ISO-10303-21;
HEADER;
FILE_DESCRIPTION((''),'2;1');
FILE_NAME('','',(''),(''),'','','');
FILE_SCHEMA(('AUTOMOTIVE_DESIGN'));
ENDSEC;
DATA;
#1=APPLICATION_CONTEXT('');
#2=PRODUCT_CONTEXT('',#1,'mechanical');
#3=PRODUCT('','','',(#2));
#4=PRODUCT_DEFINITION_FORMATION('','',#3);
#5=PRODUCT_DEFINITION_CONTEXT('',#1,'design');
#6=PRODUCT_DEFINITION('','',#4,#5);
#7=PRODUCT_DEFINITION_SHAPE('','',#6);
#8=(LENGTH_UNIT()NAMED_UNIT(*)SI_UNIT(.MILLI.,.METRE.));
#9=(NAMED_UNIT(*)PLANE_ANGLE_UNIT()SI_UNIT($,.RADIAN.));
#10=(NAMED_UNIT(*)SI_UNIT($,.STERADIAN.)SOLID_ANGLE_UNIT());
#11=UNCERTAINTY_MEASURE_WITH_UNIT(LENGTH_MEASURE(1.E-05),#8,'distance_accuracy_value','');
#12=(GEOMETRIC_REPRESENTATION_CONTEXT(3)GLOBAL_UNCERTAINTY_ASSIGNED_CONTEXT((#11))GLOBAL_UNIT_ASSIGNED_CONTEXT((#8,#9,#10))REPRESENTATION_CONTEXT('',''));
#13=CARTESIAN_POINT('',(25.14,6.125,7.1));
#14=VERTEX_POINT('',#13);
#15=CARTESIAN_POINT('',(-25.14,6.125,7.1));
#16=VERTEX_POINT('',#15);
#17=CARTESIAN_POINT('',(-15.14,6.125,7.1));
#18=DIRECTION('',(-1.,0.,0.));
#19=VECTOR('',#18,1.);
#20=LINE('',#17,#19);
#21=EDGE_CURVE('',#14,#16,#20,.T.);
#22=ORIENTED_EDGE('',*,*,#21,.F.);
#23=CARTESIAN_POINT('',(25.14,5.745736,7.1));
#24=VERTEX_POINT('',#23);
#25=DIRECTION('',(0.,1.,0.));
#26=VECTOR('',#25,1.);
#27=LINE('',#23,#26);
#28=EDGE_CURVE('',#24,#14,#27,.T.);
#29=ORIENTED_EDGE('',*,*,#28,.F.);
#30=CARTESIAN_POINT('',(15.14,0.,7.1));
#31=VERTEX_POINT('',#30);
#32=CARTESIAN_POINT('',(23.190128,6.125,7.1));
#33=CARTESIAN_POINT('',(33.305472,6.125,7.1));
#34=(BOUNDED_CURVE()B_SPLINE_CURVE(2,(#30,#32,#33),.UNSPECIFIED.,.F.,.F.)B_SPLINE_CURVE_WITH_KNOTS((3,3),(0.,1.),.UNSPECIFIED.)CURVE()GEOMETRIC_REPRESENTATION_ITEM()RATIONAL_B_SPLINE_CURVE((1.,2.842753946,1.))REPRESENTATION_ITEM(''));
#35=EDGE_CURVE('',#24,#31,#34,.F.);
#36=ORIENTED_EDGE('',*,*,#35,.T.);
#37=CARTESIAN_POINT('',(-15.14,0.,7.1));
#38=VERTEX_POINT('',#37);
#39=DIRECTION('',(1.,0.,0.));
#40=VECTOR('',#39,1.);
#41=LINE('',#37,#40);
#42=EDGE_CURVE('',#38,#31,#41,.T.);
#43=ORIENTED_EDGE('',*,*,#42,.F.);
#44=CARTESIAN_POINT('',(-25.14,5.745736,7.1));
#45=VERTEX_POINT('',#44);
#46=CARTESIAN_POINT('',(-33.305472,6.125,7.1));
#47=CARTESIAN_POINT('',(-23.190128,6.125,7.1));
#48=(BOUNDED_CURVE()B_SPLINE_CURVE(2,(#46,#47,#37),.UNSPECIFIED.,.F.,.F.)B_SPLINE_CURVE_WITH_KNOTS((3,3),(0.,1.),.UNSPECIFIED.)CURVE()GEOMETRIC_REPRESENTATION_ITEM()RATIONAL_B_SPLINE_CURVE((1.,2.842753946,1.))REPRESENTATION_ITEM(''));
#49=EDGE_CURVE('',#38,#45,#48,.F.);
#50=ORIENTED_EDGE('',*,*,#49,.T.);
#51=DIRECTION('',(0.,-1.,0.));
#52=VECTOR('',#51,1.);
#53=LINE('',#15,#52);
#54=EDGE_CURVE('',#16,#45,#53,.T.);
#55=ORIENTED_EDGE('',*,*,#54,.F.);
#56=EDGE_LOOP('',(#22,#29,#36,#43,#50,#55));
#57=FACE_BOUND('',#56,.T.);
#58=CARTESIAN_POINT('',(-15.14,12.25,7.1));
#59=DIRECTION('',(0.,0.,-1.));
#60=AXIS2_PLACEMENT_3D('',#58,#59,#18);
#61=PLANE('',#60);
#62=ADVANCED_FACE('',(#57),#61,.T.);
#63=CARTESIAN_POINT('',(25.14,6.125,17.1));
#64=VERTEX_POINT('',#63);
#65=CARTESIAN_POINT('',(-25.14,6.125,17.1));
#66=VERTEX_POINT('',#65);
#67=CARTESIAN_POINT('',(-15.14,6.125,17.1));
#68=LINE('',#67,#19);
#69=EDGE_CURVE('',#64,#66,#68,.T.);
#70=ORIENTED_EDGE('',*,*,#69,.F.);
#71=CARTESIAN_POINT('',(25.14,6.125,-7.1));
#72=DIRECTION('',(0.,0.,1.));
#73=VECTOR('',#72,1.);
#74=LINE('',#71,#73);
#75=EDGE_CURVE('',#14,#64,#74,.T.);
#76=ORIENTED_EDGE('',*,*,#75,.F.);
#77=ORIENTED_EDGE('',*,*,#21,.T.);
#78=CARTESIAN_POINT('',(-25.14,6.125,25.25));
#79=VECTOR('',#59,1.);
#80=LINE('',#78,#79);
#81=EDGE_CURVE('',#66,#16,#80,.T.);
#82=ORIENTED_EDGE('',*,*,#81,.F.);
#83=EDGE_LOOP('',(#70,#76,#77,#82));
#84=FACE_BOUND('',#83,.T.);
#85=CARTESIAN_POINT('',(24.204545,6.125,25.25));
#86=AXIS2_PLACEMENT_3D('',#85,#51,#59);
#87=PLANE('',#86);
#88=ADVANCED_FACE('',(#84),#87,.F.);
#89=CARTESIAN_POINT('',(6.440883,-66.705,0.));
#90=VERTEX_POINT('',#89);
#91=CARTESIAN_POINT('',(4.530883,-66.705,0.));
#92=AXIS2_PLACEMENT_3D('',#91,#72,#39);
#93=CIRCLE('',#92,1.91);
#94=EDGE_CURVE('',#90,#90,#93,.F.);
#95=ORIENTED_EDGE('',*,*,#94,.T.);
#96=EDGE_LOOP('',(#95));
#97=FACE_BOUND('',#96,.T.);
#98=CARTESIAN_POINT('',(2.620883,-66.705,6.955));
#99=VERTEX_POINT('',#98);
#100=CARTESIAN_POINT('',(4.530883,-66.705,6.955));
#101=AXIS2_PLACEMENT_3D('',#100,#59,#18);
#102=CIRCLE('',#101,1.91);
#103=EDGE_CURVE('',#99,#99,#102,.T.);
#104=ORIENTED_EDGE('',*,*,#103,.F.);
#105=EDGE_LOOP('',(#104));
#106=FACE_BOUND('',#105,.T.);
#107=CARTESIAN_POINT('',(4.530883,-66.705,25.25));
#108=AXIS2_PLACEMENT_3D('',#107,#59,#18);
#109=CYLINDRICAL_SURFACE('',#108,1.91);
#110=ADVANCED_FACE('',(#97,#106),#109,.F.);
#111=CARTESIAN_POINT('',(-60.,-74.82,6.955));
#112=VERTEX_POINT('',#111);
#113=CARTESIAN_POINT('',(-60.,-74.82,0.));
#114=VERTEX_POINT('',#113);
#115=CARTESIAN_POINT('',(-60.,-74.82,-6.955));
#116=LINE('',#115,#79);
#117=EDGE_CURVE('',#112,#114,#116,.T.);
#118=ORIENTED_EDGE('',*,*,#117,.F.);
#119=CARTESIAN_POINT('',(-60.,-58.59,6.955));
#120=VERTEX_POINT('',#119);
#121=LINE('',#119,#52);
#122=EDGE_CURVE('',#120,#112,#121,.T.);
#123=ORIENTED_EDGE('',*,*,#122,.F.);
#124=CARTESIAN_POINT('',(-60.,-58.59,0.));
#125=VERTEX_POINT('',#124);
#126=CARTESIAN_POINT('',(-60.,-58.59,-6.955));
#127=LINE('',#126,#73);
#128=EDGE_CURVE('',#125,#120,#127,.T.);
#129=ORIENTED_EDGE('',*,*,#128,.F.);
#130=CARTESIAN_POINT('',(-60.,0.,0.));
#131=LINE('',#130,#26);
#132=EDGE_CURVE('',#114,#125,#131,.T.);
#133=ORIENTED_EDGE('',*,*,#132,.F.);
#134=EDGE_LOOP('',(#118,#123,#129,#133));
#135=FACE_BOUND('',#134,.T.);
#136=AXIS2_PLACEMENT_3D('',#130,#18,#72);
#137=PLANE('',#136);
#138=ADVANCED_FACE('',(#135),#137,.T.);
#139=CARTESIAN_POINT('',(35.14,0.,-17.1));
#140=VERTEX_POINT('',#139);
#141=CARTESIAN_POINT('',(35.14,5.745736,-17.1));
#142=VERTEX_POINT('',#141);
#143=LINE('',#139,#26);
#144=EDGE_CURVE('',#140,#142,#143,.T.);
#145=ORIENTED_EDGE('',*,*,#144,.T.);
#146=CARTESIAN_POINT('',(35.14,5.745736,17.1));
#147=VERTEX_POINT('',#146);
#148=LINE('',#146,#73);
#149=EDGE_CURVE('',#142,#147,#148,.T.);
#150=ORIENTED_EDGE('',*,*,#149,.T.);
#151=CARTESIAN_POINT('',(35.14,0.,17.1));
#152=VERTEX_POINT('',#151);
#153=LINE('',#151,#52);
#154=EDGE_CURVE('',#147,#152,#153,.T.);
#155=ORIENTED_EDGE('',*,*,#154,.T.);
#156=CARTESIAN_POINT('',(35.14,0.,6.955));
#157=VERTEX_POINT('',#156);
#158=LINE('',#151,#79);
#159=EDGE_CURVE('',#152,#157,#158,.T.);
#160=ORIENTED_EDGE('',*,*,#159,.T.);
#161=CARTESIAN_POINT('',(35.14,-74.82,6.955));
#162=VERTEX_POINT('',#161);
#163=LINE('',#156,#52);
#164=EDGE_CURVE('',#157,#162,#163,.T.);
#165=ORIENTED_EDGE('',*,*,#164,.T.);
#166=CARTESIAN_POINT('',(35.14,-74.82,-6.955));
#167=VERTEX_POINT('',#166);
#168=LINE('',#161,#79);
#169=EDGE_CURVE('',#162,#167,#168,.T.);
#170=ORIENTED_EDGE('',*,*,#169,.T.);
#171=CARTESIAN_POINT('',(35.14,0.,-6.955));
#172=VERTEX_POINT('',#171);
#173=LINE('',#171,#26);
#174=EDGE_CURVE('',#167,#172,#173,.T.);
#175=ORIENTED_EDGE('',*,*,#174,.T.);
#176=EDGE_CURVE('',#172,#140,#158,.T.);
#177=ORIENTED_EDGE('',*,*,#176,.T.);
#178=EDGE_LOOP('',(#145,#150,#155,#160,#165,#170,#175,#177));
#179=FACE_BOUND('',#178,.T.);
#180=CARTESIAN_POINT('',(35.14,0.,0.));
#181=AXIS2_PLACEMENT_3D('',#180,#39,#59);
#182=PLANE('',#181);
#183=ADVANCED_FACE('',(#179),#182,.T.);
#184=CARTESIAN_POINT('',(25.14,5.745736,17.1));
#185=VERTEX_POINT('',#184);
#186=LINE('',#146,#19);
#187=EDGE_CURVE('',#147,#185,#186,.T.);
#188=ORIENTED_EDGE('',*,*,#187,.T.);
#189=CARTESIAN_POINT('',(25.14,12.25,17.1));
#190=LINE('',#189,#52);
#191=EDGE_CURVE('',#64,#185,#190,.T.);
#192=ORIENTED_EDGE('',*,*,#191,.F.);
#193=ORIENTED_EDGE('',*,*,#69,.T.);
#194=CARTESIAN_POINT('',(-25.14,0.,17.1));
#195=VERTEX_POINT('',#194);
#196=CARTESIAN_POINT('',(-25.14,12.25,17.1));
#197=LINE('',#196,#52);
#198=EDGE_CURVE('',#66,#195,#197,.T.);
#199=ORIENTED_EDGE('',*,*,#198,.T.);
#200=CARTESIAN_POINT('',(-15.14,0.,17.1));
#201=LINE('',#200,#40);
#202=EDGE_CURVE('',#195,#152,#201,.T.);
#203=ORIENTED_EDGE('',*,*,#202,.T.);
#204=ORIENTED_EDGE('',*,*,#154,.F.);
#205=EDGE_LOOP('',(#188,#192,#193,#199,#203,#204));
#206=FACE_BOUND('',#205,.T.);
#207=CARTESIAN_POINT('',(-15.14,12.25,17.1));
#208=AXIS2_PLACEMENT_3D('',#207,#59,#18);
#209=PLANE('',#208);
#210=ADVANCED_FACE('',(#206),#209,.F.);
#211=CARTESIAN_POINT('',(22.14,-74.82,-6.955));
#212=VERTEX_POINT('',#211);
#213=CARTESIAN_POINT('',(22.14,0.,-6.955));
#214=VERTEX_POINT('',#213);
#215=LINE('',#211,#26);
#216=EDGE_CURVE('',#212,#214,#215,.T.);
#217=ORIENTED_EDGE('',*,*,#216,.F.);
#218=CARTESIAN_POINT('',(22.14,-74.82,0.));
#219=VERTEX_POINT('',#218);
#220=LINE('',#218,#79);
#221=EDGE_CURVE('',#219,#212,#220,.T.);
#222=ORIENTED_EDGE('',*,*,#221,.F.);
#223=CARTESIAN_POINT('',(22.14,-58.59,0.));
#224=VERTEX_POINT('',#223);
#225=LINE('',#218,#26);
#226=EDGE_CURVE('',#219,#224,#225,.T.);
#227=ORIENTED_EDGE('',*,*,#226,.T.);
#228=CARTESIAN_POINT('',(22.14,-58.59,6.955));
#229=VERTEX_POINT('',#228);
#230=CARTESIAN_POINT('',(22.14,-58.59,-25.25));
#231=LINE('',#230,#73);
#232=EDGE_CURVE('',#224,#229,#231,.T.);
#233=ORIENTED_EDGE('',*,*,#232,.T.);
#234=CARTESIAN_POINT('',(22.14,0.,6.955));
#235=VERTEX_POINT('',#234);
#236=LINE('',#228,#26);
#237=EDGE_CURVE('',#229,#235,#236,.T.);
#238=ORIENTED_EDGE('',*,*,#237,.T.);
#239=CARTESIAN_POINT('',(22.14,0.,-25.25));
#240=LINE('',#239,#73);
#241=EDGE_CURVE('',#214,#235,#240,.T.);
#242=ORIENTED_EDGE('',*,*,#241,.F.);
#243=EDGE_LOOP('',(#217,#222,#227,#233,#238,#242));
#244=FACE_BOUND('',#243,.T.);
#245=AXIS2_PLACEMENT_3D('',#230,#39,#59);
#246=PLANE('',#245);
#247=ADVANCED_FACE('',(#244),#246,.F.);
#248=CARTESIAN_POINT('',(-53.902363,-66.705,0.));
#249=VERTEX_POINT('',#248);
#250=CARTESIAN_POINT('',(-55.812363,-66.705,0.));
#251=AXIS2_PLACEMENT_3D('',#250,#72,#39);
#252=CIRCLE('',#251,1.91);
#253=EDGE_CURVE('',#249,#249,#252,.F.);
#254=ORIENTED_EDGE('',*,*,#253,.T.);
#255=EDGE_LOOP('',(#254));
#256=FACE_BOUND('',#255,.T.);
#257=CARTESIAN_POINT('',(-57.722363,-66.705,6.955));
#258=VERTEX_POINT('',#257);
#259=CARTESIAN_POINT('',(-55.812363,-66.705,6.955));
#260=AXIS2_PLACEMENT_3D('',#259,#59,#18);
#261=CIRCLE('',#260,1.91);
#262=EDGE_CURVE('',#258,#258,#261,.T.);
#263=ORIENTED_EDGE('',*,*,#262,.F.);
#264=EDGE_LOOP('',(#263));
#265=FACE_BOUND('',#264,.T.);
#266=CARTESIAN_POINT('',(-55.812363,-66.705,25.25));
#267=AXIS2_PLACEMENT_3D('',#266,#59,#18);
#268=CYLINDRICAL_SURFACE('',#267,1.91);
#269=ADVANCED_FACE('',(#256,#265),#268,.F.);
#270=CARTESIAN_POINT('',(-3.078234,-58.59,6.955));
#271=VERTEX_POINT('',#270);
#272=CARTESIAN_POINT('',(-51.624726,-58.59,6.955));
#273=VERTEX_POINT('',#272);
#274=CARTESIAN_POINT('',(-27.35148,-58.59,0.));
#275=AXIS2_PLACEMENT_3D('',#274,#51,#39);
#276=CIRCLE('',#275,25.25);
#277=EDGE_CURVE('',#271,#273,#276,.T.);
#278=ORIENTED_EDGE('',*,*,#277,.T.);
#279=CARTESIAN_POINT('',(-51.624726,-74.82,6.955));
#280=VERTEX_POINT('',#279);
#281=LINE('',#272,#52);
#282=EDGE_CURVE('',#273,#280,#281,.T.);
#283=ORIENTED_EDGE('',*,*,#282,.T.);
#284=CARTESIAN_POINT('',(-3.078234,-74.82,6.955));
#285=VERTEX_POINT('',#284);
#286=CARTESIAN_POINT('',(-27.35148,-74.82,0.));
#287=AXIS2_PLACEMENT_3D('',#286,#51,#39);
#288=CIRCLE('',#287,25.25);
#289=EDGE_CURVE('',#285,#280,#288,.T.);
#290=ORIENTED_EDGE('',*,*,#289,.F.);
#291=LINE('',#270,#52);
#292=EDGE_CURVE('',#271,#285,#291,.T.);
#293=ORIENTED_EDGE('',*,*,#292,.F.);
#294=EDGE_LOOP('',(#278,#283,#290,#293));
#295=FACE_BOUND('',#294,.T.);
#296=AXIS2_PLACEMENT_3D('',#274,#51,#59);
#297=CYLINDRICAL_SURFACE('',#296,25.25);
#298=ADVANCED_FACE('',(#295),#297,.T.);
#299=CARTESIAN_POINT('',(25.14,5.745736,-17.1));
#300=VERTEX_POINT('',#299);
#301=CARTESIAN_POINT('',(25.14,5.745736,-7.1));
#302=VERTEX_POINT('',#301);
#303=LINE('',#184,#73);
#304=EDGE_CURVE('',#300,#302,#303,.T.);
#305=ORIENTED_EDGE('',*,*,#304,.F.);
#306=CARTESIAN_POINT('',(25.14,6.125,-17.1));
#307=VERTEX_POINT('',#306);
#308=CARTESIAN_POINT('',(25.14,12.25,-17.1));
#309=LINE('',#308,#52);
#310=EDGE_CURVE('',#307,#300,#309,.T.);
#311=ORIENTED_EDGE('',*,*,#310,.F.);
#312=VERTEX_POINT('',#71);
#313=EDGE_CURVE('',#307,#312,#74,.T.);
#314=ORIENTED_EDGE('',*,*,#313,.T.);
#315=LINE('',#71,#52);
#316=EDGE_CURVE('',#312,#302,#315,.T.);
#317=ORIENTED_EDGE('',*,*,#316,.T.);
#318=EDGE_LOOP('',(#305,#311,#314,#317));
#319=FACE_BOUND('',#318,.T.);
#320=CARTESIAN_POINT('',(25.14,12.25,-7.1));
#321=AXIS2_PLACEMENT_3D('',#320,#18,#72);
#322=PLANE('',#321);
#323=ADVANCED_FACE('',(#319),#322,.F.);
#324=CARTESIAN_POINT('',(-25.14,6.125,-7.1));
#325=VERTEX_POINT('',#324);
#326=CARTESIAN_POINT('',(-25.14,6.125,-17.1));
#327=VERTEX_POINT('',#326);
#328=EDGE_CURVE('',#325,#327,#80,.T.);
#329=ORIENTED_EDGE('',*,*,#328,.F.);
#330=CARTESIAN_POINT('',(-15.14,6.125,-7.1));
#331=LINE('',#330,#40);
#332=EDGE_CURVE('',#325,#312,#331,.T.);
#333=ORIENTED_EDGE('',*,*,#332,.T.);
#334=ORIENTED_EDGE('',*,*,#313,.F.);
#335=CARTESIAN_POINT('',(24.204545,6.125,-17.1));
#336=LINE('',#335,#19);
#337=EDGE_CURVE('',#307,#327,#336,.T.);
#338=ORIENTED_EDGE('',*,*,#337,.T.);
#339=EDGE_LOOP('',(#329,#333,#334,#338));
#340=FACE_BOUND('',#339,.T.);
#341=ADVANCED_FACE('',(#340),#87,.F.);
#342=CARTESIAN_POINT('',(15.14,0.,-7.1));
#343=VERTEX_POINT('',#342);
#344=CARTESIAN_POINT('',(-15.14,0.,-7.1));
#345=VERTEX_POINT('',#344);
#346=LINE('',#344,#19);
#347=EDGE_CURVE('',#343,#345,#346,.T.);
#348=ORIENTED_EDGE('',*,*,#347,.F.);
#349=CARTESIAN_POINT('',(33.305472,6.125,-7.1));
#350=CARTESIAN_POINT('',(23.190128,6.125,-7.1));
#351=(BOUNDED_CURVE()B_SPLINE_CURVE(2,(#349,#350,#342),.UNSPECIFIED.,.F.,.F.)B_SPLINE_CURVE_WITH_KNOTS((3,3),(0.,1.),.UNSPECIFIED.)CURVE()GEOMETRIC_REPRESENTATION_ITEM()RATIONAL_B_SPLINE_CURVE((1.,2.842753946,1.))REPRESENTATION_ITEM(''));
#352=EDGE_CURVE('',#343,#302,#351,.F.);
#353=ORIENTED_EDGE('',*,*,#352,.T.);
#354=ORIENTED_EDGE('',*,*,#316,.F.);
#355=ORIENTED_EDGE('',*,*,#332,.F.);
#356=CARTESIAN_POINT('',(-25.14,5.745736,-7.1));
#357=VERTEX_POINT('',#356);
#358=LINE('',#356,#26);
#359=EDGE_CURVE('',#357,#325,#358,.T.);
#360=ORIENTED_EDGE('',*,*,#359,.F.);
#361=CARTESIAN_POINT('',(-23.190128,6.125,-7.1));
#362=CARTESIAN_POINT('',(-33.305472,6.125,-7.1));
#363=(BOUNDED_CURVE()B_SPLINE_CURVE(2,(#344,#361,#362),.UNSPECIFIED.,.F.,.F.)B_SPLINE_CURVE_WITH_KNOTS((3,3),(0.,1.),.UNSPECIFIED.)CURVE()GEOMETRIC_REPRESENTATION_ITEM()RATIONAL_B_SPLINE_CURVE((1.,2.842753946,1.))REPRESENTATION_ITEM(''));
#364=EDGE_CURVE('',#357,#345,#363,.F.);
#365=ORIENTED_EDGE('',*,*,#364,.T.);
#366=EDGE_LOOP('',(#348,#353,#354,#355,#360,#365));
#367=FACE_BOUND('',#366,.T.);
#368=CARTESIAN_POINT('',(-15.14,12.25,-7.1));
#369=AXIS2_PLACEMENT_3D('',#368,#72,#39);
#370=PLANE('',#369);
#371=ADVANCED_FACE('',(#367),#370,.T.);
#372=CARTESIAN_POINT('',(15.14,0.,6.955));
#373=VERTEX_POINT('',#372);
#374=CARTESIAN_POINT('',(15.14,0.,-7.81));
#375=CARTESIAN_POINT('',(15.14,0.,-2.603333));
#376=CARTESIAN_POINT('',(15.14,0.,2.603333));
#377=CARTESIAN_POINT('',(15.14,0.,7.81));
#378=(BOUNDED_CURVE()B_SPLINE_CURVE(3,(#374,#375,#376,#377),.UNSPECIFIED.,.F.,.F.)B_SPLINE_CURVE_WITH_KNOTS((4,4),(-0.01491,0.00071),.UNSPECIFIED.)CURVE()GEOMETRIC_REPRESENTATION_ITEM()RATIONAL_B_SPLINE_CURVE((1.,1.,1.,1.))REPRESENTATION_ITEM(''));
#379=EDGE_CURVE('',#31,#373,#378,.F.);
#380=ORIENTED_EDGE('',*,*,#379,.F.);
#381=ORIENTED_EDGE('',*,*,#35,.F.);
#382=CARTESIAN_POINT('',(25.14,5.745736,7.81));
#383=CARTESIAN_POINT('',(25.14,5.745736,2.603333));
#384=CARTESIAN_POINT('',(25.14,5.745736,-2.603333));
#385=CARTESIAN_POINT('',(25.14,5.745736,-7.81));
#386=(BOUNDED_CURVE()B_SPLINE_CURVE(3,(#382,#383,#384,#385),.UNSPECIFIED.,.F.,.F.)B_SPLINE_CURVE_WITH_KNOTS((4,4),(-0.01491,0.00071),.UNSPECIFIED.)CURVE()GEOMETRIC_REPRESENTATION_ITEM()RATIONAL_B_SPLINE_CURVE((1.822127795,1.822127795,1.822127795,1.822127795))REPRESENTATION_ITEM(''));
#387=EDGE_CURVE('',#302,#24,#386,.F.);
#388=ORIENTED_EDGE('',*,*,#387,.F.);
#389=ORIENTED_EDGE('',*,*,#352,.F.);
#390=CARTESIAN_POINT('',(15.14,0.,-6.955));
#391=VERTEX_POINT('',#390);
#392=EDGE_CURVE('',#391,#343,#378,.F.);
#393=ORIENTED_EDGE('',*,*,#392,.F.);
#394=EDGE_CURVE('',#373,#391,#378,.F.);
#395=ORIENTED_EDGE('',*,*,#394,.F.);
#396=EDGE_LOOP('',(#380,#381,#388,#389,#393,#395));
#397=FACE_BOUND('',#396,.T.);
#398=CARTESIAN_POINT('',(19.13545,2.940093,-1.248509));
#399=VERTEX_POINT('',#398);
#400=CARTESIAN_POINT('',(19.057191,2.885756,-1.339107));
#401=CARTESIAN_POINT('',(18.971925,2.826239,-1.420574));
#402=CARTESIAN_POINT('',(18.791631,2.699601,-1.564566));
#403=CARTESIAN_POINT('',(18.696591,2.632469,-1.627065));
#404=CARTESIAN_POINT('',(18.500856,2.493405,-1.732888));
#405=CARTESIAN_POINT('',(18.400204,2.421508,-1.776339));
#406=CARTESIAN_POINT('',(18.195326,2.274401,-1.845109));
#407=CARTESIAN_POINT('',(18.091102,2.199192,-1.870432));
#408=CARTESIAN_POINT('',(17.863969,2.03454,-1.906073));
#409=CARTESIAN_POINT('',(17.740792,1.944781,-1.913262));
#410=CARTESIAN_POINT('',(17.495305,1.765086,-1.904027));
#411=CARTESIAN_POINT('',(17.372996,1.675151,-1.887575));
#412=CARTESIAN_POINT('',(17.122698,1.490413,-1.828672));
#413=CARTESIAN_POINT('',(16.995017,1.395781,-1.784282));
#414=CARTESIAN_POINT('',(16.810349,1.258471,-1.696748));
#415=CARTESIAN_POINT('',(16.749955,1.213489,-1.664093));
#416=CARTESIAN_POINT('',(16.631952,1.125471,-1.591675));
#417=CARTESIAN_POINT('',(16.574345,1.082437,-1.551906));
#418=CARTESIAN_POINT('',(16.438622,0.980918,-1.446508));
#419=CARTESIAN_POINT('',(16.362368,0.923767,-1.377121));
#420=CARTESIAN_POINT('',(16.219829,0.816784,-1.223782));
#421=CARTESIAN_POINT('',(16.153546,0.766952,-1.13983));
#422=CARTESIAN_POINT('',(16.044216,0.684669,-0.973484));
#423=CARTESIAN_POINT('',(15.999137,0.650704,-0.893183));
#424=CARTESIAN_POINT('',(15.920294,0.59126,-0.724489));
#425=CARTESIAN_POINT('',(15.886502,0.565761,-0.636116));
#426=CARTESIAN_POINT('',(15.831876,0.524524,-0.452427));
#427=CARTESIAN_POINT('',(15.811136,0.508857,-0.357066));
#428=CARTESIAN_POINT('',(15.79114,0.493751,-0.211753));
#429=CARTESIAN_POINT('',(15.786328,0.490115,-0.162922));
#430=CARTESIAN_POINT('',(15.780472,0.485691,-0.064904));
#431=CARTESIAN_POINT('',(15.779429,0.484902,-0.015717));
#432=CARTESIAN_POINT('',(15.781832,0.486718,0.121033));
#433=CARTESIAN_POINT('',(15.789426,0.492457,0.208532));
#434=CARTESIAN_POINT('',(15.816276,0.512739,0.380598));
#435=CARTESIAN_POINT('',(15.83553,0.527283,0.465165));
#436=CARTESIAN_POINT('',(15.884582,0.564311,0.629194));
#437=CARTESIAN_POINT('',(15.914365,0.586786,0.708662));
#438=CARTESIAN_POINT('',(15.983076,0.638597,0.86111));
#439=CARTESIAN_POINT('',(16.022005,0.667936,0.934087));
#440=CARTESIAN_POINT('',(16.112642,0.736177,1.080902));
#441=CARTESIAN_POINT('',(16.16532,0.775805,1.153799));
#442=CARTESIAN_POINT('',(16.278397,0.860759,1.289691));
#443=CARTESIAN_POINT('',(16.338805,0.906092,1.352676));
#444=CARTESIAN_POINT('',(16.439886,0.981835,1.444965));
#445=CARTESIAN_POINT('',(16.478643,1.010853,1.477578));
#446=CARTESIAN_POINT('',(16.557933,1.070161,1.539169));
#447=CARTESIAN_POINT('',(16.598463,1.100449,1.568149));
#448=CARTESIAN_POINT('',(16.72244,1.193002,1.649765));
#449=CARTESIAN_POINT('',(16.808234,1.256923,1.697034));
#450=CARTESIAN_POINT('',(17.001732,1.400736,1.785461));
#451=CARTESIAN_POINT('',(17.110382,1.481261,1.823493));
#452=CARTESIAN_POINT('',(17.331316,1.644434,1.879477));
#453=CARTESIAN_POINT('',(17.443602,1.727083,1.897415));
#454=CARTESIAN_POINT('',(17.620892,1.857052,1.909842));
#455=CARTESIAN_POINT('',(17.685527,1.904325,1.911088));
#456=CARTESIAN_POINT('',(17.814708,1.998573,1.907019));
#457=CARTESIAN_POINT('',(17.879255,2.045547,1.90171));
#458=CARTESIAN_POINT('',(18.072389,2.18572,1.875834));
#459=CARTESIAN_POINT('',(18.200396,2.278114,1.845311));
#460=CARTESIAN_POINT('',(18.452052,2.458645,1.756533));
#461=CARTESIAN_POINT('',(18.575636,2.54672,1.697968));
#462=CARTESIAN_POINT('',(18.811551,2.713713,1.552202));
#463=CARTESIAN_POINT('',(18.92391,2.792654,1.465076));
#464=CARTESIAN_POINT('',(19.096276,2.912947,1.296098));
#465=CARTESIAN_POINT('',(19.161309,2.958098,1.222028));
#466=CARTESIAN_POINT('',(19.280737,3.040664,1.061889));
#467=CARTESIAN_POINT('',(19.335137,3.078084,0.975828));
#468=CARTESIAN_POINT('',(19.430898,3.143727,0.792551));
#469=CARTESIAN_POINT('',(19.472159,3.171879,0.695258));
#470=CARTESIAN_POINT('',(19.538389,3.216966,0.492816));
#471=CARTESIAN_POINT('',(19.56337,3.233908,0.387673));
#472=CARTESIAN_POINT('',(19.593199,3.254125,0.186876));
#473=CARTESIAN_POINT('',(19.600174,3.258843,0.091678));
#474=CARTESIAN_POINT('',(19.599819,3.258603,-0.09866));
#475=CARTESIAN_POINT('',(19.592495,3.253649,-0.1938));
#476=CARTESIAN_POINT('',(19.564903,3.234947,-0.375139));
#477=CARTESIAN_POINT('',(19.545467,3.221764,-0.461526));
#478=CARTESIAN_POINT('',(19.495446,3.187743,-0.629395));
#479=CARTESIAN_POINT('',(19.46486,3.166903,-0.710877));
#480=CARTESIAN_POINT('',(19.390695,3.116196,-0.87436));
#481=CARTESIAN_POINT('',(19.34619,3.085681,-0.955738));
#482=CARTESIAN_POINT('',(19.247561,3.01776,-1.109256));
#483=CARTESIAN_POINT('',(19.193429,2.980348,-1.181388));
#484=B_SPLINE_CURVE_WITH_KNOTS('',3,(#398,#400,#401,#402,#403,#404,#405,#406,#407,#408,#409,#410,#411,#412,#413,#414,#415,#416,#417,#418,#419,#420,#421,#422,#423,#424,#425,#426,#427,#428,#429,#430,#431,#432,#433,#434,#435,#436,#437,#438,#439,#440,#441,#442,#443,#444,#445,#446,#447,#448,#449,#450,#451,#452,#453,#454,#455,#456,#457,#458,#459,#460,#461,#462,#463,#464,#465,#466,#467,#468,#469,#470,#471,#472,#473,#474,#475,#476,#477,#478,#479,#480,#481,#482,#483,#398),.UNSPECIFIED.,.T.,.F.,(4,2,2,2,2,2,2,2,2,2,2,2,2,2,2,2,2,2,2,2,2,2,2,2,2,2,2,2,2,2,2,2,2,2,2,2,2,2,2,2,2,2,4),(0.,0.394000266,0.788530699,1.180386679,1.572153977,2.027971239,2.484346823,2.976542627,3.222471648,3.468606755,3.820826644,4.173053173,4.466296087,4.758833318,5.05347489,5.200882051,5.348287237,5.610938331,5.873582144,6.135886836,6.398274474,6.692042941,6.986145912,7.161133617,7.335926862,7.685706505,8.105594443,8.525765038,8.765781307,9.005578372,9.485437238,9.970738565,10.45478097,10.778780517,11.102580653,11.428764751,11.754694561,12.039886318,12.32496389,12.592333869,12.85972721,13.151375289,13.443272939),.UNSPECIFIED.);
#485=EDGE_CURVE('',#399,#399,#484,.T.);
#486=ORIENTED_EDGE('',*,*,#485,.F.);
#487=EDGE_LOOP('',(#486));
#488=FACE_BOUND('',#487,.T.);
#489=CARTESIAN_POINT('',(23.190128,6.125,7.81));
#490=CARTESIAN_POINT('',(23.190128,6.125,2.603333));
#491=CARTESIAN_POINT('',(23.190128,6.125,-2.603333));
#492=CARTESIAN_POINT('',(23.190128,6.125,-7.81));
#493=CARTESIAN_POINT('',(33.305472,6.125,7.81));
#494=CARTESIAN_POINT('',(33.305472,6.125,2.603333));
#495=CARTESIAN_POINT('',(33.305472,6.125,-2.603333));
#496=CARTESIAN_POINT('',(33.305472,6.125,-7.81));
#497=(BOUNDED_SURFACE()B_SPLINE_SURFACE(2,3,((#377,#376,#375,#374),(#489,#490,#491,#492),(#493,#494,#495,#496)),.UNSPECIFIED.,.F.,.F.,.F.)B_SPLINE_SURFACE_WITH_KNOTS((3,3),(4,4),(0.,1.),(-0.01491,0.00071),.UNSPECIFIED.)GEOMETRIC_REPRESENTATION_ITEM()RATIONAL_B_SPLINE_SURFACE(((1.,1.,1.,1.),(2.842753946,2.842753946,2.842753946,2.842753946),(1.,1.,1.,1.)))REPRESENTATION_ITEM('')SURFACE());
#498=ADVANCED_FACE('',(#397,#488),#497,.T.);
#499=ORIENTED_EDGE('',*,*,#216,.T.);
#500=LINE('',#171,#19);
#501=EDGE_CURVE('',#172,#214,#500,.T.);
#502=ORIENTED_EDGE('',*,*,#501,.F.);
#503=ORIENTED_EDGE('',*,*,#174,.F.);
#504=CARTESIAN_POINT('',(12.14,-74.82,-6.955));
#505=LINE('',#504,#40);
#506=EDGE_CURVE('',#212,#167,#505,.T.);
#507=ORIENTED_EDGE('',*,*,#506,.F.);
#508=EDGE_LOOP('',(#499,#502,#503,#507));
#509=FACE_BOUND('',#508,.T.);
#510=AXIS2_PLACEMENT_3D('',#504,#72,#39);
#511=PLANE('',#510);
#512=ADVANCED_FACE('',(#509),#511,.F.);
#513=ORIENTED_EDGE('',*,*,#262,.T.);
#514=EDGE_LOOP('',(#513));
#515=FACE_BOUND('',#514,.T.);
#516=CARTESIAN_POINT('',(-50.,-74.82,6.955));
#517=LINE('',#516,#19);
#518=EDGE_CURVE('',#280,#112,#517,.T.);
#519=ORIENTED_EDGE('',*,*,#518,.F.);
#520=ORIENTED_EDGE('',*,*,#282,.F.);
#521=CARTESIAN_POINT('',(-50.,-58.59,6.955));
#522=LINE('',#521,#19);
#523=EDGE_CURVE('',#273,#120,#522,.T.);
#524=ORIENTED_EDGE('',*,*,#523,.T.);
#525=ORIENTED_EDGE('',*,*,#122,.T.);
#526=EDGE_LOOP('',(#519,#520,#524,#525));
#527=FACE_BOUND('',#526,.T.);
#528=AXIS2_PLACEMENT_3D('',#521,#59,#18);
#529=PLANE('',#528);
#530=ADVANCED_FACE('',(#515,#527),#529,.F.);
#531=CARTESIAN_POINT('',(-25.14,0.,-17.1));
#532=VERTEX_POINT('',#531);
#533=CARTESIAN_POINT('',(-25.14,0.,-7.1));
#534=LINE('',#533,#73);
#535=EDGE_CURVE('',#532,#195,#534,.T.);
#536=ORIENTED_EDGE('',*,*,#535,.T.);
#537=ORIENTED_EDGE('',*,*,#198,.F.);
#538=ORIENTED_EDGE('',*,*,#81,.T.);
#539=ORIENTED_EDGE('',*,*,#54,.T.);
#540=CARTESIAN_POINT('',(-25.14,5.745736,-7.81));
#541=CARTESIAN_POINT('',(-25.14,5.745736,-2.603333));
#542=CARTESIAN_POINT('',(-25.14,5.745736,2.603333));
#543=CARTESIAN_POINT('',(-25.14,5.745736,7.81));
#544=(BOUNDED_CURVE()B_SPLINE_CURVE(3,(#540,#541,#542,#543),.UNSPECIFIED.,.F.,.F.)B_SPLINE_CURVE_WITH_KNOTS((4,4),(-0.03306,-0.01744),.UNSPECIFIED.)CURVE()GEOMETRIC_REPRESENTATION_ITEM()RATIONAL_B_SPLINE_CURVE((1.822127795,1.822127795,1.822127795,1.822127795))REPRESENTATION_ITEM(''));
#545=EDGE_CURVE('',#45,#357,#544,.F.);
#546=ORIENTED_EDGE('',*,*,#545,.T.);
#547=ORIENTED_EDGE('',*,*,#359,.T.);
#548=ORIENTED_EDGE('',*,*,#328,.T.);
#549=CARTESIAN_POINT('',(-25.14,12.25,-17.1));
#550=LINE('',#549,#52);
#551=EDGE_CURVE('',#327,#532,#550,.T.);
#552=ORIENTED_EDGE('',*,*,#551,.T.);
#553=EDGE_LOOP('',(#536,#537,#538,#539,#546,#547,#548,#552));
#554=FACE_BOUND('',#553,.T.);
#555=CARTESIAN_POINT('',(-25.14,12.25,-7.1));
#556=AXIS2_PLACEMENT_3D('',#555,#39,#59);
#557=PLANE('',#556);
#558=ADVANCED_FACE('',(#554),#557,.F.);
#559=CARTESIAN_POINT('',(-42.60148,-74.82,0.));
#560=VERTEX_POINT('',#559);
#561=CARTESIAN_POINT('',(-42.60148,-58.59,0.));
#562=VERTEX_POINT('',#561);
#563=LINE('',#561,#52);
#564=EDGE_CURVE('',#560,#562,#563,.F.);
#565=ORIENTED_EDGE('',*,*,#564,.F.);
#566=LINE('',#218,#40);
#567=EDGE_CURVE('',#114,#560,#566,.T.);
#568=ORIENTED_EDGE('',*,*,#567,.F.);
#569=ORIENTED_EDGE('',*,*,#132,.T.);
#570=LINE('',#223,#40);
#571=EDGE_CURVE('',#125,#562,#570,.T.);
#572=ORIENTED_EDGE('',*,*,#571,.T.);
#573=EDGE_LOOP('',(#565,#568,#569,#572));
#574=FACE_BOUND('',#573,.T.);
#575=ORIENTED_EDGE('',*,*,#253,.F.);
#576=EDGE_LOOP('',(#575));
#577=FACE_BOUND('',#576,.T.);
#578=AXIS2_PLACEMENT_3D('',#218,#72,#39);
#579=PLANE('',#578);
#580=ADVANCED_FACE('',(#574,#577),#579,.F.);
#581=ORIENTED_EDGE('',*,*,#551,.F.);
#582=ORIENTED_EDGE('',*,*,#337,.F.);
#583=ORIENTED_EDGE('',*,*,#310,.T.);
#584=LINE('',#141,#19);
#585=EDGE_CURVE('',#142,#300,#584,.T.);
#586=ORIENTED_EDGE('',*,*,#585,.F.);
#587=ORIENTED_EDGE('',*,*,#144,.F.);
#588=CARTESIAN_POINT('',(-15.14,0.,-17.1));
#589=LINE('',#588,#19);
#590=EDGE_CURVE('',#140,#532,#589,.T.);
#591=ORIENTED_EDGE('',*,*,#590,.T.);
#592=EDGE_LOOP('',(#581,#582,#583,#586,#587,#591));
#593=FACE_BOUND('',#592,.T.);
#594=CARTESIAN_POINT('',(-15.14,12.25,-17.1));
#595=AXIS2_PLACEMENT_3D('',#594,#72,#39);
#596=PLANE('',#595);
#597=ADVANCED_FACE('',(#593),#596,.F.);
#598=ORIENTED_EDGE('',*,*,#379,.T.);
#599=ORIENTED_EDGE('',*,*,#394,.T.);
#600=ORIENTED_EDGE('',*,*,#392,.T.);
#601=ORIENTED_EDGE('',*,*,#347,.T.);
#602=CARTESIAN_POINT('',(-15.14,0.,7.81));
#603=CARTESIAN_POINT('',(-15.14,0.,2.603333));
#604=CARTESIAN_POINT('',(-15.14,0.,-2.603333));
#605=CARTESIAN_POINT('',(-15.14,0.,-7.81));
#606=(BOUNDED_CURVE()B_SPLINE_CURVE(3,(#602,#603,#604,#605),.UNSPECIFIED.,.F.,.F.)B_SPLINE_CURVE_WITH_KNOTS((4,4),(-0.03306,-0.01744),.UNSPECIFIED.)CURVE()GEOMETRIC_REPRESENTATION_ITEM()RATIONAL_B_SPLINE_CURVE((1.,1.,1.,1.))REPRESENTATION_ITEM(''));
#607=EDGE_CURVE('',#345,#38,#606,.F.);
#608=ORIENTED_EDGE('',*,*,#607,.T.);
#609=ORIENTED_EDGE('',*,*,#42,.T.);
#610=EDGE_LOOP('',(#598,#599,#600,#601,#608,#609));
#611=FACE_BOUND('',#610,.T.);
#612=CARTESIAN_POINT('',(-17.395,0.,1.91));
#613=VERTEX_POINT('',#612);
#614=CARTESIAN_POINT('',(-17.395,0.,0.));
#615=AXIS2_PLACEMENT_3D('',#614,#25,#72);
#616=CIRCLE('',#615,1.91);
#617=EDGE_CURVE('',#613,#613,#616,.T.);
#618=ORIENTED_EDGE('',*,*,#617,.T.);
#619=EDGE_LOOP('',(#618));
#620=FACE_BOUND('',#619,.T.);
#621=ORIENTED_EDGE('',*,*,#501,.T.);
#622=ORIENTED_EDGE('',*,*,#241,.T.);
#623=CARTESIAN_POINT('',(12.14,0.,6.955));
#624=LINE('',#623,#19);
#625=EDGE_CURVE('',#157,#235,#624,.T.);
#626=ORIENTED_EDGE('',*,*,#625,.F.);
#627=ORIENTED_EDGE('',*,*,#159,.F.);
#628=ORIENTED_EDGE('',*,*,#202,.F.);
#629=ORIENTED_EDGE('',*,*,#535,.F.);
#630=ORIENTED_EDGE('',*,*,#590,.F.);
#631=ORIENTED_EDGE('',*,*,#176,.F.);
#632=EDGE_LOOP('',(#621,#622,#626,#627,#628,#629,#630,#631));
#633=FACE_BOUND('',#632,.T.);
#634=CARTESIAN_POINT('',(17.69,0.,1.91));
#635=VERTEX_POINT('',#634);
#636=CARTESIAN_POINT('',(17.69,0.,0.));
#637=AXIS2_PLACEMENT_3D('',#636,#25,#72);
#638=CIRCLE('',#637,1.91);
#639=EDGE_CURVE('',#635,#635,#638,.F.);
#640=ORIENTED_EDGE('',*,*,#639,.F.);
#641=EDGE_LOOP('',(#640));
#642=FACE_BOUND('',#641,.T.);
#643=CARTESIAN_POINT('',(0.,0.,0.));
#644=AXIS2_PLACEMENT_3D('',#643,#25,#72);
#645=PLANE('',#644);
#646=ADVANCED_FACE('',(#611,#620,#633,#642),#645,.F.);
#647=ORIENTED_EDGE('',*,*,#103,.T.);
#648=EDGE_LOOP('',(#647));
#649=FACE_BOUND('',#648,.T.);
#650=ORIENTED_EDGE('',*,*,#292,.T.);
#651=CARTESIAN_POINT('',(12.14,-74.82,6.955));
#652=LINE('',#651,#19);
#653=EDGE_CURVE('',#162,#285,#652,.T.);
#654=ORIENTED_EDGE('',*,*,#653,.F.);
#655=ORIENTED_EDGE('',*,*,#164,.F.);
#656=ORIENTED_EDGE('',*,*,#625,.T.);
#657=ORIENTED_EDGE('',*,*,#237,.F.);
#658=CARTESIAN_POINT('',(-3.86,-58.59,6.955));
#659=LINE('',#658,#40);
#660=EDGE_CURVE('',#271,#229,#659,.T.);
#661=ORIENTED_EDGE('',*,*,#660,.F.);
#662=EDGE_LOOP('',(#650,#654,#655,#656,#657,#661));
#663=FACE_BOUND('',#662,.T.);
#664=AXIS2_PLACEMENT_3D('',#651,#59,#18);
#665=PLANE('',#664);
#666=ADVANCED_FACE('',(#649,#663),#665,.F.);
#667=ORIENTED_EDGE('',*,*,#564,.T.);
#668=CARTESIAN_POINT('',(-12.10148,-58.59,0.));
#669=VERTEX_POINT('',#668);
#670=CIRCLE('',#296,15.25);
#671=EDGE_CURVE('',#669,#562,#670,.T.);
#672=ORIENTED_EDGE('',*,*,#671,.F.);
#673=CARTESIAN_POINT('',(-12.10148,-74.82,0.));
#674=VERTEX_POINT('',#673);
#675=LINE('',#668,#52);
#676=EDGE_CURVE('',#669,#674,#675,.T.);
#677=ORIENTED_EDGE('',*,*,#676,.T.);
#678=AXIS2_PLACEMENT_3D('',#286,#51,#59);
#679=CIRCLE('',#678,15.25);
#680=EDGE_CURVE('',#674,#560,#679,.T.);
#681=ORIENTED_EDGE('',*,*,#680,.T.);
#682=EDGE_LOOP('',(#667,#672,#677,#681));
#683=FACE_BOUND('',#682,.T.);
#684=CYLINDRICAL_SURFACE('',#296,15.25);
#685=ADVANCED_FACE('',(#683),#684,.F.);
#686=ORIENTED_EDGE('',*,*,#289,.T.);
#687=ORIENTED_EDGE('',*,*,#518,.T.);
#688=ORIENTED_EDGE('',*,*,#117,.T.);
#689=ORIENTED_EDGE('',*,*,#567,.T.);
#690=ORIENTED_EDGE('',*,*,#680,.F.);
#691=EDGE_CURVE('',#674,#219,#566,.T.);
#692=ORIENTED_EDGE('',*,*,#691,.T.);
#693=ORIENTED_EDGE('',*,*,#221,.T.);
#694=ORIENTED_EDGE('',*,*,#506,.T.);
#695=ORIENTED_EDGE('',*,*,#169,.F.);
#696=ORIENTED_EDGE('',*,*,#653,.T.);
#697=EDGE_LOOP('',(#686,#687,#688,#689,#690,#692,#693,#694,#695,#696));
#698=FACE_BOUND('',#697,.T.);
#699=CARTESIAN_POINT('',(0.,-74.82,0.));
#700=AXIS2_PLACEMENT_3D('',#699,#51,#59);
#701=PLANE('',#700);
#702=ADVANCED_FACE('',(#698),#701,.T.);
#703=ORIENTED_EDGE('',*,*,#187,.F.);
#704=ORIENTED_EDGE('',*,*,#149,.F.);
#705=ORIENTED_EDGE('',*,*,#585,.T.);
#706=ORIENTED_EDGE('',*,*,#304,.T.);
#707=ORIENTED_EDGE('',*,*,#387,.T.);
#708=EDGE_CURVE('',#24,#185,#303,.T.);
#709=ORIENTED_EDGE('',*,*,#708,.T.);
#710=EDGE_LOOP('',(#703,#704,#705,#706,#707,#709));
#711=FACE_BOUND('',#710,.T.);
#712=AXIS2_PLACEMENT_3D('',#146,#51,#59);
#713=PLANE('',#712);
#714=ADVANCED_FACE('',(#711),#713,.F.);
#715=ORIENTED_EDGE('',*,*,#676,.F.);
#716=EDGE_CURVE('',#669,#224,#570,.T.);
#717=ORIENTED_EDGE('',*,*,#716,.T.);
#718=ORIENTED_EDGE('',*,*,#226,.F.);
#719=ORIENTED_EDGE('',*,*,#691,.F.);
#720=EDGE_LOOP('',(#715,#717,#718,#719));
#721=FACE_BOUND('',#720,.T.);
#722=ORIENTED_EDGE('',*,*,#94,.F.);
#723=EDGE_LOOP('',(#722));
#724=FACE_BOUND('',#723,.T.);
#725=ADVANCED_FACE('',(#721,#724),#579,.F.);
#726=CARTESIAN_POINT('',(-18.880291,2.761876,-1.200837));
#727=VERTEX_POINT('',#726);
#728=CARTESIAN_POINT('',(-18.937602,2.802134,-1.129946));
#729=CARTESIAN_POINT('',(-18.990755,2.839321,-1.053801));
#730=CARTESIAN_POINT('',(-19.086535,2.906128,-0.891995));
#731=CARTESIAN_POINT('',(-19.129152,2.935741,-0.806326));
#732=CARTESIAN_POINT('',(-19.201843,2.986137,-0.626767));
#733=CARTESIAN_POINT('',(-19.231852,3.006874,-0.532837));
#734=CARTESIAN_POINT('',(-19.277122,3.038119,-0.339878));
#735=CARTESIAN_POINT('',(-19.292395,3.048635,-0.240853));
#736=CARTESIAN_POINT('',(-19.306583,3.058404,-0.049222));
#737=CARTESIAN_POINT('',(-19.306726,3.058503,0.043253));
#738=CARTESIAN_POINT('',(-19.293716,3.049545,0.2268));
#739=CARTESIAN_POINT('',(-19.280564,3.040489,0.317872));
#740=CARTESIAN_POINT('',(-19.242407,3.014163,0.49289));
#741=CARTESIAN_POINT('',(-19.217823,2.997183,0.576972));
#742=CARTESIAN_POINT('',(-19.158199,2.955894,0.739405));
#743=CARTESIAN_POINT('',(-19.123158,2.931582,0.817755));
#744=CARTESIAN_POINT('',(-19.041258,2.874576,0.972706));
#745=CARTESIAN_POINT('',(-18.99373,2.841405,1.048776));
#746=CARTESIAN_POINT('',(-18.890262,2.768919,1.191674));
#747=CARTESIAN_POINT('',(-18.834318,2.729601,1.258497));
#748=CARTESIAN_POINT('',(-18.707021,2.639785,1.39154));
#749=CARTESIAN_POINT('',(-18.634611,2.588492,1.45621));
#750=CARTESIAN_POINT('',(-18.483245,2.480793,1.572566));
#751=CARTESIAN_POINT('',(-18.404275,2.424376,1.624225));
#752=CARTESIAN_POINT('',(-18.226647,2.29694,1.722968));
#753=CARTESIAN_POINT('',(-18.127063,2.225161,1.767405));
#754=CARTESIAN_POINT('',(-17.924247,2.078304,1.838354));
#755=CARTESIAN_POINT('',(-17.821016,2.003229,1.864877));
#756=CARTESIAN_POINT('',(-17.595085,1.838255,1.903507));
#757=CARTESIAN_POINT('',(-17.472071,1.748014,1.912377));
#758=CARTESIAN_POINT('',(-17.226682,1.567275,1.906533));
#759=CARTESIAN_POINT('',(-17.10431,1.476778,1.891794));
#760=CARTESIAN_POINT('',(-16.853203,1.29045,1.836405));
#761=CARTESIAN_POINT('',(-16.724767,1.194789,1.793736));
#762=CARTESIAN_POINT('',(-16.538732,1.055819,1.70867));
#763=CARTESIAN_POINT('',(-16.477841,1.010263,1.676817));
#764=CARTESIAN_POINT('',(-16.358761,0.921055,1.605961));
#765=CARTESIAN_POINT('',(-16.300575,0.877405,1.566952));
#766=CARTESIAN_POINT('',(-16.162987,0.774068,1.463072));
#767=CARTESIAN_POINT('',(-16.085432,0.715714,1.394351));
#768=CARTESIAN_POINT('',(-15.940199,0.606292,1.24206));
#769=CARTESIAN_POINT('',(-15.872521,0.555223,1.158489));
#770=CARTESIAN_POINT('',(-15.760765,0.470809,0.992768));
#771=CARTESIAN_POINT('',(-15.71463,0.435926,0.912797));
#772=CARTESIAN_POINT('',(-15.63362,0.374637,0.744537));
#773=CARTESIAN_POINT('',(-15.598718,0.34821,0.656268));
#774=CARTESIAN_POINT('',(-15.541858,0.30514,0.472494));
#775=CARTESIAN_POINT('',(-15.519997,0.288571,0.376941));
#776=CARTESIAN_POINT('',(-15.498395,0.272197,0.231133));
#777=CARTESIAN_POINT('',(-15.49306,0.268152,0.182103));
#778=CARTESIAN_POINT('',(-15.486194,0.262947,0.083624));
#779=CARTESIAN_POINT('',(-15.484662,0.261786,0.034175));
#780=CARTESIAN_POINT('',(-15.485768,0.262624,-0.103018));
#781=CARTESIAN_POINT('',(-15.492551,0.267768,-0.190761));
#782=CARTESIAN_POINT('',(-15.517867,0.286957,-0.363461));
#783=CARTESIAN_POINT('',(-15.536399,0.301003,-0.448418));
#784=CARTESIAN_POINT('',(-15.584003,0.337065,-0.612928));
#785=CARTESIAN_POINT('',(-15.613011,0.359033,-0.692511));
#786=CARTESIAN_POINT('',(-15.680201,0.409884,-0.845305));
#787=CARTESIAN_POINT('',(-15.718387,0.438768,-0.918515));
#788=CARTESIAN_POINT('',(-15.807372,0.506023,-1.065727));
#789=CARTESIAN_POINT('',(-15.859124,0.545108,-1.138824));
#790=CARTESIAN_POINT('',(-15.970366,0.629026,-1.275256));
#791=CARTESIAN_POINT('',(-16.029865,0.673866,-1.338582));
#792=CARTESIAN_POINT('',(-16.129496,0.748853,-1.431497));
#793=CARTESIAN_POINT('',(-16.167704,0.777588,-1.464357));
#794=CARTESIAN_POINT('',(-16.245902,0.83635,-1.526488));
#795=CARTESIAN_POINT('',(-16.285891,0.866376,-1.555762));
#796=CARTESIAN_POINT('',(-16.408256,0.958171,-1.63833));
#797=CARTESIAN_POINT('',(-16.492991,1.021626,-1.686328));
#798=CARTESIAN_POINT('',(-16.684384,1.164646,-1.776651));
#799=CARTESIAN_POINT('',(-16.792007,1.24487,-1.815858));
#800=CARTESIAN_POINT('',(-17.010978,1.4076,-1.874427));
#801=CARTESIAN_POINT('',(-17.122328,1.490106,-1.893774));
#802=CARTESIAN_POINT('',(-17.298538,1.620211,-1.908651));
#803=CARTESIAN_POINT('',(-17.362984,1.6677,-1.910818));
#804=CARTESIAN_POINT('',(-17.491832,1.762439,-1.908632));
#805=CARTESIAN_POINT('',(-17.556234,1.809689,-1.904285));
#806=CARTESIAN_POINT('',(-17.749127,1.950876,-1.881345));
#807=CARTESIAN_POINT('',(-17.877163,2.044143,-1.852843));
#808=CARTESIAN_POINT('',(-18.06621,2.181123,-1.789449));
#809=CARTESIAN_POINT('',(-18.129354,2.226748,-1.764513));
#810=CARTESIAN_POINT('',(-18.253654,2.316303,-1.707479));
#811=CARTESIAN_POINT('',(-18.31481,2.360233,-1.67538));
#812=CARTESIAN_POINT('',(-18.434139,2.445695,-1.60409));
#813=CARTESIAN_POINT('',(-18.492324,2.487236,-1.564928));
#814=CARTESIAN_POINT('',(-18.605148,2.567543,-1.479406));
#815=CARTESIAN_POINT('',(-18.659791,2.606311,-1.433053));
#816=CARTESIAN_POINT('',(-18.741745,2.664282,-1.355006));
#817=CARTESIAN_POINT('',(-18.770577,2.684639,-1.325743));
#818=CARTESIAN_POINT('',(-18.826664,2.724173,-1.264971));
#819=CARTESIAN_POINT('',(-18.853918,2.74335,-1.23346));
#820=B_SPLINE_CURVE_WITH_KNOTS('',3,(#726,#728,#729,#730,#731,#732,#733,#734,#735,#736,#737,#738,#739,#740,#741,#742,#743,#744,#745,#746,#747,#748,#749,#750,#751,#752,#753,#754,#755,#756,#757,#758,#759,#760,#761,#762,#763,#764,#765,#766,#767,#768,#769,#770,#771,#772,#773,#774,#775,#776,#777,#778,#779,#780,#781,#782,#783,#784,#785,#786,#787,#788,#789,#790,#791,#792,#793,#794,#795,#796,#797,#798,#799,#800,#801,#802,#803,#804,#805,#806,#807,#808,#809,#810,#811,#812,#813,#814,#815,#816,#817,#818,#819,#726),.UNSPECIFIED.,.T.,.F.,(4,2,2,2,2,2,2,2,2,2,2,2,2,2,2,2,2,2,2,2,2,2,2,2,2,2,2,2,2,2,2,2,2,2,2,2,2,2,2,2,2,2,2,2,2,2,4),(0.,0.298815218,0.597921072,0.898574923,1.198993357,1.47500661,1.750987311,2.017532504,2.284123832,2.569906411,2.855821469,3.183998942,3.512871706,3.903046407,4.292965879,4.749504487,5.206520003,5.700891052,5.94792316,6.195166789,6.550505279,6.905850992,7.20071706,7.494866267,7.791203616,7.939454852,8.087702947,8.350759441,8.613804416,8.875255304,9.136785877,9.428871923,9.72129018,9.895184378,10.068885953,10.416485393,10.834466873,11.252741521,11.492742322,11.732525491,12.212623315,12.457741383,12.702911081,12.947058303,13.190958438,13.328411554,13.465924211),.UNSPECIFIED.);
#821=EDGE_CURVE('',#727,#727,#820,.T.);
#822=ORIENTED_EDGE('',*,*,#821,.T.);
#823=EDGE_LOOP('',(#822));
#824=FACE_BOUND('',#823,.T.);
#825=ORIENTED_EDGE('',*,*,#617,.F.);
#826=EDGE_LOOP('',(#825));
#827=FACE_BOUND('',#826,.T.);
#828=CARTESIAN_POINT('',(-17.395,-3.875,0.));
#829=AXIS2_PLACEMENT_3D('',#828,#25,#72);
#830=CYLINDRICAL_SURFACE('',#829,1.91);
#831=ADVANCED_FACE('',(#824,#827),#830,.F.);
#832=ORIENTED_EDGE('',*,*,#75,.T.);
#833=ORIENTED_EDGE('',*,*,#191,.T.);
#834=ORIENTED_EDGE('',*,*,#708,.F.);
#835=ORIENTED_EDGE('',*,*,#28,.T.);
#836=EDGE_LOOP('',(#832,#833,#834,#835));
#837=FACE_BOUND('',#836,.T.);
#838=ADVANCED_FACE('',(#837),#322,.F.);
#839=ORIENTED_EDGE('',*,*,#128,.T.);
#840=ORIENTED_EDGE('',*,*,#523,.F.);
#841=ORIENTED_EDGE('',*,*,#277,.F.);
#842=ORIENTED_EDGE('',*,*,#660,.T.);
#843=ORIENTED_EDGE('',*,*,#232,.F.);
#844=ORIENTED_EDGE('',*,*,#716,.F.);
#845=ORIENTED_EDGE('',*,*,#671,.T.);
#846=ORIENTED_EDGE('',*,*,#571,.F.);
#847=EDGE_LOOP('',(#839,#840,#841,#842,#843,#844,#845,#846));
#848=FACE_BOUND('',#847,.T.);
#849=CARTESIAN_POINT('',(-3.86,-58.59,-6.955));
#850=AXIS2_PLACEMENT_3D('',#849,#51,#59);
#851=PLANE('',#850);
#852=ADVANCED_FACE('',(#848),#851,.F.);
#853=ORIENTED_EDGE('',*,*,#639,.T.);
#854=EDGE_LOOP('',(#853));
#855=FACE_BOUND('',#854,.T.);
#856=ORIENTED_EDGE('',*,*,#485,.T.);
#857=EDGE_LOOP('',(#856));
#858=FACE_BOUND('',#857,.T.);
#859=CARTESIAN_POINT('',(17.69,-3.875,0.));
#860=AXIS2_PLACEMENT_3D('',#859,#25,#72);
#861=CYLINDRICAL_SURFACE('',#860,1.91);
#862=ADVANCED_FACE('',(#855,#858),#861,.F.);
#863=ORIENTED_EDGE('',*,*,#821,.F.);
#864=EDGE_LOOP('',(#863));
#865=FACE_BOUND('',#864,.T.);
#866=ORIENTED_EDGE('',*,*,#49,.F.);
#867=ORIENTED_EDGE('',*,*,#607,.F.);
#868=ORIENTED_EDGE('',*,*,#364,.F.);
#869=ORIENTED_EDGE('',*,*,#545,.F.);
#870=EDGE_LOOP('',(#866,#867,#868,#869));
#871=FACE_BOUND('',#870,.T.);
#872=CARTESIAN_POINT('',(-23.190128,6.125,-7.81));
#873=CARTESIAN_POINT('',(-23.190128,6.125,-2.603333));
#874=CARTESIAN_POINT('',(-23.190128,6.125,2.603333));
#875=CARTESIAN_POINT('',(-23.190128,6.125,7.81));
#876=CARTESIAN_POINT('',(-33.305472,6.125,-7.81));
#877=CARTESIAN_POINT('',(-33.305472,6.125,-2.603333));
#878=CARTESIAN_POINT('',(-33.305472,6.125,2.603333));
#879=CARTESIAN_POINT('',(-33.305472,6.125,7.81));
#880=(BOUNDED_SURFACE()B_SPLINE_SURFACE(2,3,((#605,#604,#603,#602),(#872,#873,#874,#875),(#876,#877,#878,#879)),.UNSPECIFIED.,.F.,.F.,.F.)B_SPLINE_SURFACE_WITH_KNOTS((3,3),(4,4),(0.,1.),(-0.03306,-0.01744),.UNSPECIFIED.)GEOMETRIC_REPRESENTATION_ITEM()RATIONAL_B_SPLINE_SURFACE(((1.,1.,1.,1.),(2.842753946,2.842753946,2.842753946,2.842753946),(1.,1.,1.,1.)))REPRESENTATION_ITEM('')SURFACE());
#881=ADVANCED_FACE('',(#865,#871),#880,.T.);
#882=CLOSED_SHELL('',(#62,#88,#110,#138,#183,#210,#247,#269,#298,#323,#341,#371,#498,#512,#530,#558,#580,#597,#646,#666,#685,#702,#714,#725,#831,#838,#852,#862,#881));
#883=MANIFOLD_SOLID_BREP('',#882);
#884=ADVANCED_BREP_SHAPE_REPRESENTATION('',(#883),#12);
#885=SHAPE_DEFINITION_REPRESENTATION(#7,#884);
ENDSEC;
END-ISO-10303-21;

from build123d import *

# Parameters (mm, degrees)
SKETCH_1_W           = 50.28
SKETCH_1_H           = 34.2
SKETCH_1_W_2         = 30.28
SKETCH_1_H_2         = 14.2
EXTRUDE_1_DEPTH      = 12.25
SKETCH_4_W           = 13
SKETCH_4_H           = 13.91
EXTRUDE_1_2_DEPTH    = 74.82
SKETCH_5_W           = 13.91
SKETCH_5_H           = 16.23
EXTRUDE_2_DEPTH      = 16
SKETCH_7_R           = 25.25
SKETCH_7_R_2         = 15.25
EXTRUDE_2_2_DEPTH    = 16.23
SKETCH_15_R          = 1.91
CUT_EXTRUDE_6_DEPTH  = 97.964478439
SKETCH_16_W          = 13.91
SKETCH_16_H          = 16.23
EXTRUDE_4_DEPTH      = 10
SKETCH_17_R          = 1.91
CUT_EXTRUDE_7_DEPTH  = 102.16913771
SKETCH_18_W          = 49.344544624
SKETCH_18_H          = 6.125
CUT_EXTRUDE_8_DEPTH  = 105.840616652
SKETCH_19_W          = 34.2
SKETCH_19_H          = 6.125
CUT_EXTRUDE_9_DEPTH  = 10
SKETCH_21_R          = 1.91
CUT_EXTRUDE_10_DEPTH = 10
SKETCH_20_R          = 1.91
CUT_EXTRUDE_11_DEPTH = 10
FILLET_START         = -7.1
FILLET_1_DEPTH       = 14.2
FILLET_2_DEPTH       = 14.2
SKETCH_29_W          = 13.91
SKETCH_29_H          = 74.82
EXTRUDE_5_DEPTH      = 10
SKETCH_30_W          = 10
SKETCH_30_H          = 58.59
CUT_EXTRUDE_13_DEPTH = 102.16913771
SKETCH_32_W          = 34.2
SKETCH_32_H          = 5.745736365
EXTRUDE_6_DEPTH      = 10
SKETCH_33_W          = 107.115454733
SKETCH_33_H          = 42.36882751
CUT_EXTRUDE_14_DEPTH = 92.791032993


with BuildPart() as part:
    # 草圖1 → Extrude 1 (new body)
    with BuildSketch(Plane(origin=(0, 0, 0), x_dir=(1, 0, 0), z_dir=(0, 1, 0))):
        Rectangle(SKETCH_1_W, SKETCH_1_H)
        Rectangle(SKETCH_1_W_2, SKETCH_1_H_2, mode=Mode.SUBTRACT)
    extrude(amount=EXTRUDE_1_DEPTH)

    # 草圖4 → Extrude 1 2 (add)
    with BuildSketch(Plane.XZ):
        with Locations((18.64, 0)):
            Rectangle(SKETCH_4_W, SKETCH_4_H)
    extrude(amount=EXTRUDE_1_2_DEPTH)

    # 草圖5 → Extrude 2 (add)
    with BuildSketch(Plane.ZY.offset(-12.14)):
        with Locations((0, -66.705)):
            Rectangle(SKETCH_5_W, SKETCH_5_H)
    extrude(amount=EXTRUDE_2_DEPTH)

    # 草圖7 → Extrude 2 2 (add)
    with BuildSketch(Plane(origin=(3.626674765, -74.82, 0), x_dir=(1, 0, 0), z_dir=(0, -1, 0))):
        with Locations((-30.978154344, 0)):
            Circle(SKETCH_7_R)
        with Locations((-30.978154344, 0)):
            Circle(SKETCH_7_R_2, mode=Mode.SUBTRACT)
    extrude(amount=-EXTRUDE_2_2_DEPTH)

    # 草圖15 → 除料-伸長6 (cut, through all)
    with BuildSketch(Plane(origin=(0, 0, -6.955), x_dir=(-1, 0, 0), z_dir=(0, 0, -1))):
        with Locations((-4.530883248, -66.705)):
            Circle(SKETCH_15_R)
    extrude(amount=-CUT_EXTRUDE_6_DEPTH, mode=Mode.SUBTRACT)

    # 草圖16 → 填料-伸長4 (add)
    with BuildSketch(Plane(origin=(-60, 0, 0), x_dir=(0, 0, -1), z_dir=(1, 0, 0))):
        with Locations((0, -66.705)):
            Rectangle(SKETCH_16_W, SKETCH_16_H)
    extrude(amount=EXTRUDE_4_DEPTH)

    # 草圖17 → 除料-伸長7 (cut, through all)
    with BuildSketch(Plane(origin=(0, 0, -6.955), x_dir=(-1, 0, 0), z_dir=(0, 0, -1))):
        with Locations((55.812362827, -66.705)):
            Circle(SKETCH_17_R)
    extrude(amount=-CUT_EXTRUDE_7_DEPTH, mode=Mode.SUBTRACT)

    # 草圖18 → 除料-伸長8 (cut, through all)
    with BuildSketch(Plane(origin=(0, 0, -17.1), x_dir=(-1, 0, 0), z_dir=(0, 0, -1))):
        with Locations((0.467727688, 9.1875)):
            Rectangle(SKETCH_18_W, SKETCH_18_H)
    extrude(amount=-CUT_EXTRUDE_8_DEPTH, mode=Mode.SUBTRACT)

    # 草圖19 → 除料-伸長9 (cut)
    with BuildSketch(Plane.ZY.offset(-24.204544624)):
        with Locations((0, 9.1875)):
            Rectangle(SKETCH_19_W, SKETCH_19_H)
    extrude(amount=-CUT_EXTRUDE_9_DEPTH, mode=Mode.SUBTRACT)

    # 草圖21 → 除料-伸長10 (cut)
    with BuildSketch(Plane(origin=(0, 6.125, 0), x_dir=(1, 0, 0), z_dir=(0, 1, 0))):
        with Locations(Location((17.69, 0, 0), (0, 0, 270))):
            Circle(SKETCH_21_R)
    extrude(amount=-CUT_EXTRUDE_10_DEPTH, mode=Mode.SUBTRACT)

    # 草圖20 → 除料-伸長11 (cut)
    with BuildSketch(Plane(origin=(0, 6.125, 0), x_dir=(1, 0, 0), z_dir=(0, 1, 0))):
        with Locations(Location((-17.395, 0, 0), (0, 0, 270))):
            Circle(SKETCH_20_R)
    extrude(amount=-CUT_EXTRUDE_11_DEPTH, mode=Mode.SUBTRACT)

    # 圓角1: read off the stored shape, not the designer's step
    # 圓角1 outline → 圓角1 (cut)
    with BuildSketch(Plane.XY.offset(FILLET_START)):
        with BuildLine():
            add(Edge.make_bspline(
                [(-15.14, 0), (-21.974170252, 5.199829476), (-25.14, 5.745736365)],
                knots=[0, 0, 0, 0.664102345, 0.664102345, 0.664102345], degree=2, weights=[1, 2.223777218, 1.822127795]))
            Line((-15.14, 0), (-15.14, 6.125))
            Line((-15.14, 6.125), (-25.14, 6.125))
            Line((-25.14, 6.125), (-25.14, 5.745736365))
        make_face()
    extrude(amount=FILLET_1_DEPTH, mode=Mode.SUBTRACT)

    # 圓角2: read off the stored shape, not the designer's step
    # 圓角2 outline → 圓角2 (cut)
    with BuildSketch(Plane.XY.offset(FILLET_START)):
        with BuildLine():
            Line((15.14, 6.125), (15.14, 0))
            add(Edge.make_bspline(
                [(15.14, 0), (21.974170252, 5.199829476), (25.14, 5.745736365)],
                knots=[0, 0, 0, 0.664102345, 0.664102345, 0.664102345], degree=2, weights=[1, 2.223777218, 1.822127795]))
            Line((25.14, 5.745736365), (25.14, 6.125))
            Line((25.14, 6.125), (15.14, 6.125))
        make_face()
    extrude(amount=FILLET_2_DEPTH, mode=Mode.SUBTRACT)

    # 草圖29 → 填料-伸長5 (add)
    with BuildSketch(Plane(origin=(25.14, 0, 0), x_dir=(0, 0, -1), z_dir=(1, 0, 0))):
        with Locations((0, -37.41)):
            Rectangle(SKETCH_29_W, SKETCH_29_H)
    extrude(amount=EXTRUDE_5_DEPTH)

    # 草圖30 → 除料-伸長13 (cut, through all)
    with BuildSketch(Plane.XY.offset(6.955)):
        with Locations((17.14, -29.295)):
            Rectangle(SKETCH_30_W, SKETCH_30_H)
    extrude(amount=-CUT_EXTRUDE_13_DEPTH, mode=Mode.SUBTRACT)

    # 草圖32 → 填料-伸長6 (add)
    with BuildSketch(Plane(origin=(25.14, 0, 0), x_dir=(0, 0, -1), z_dir=(1, 0, 0))):
        with Locations((0, 2.872868182)):
            Rectangle(SKETCH_32_W, SKETCH_32_H)
    extrude(amount=EXTRUDE_6_DEPTH)

    # 草圖33 → 除料-伸長14 (cut, through all)
    with BuildSketch(Plane(origin=(0, -58.59, 0), x_dir=(1, 0, 0), z_dir=(0, 1, 0))):
        with Locations((-31.417727367, 21.184413755)):
            Rectangle(SKETCH_33_W, SKETCH_33_H)
    extrude(amount=-CUT_EXTRUDE_14_DEPTH, mode=Mode.SUBTRACT)


solid = part.part
